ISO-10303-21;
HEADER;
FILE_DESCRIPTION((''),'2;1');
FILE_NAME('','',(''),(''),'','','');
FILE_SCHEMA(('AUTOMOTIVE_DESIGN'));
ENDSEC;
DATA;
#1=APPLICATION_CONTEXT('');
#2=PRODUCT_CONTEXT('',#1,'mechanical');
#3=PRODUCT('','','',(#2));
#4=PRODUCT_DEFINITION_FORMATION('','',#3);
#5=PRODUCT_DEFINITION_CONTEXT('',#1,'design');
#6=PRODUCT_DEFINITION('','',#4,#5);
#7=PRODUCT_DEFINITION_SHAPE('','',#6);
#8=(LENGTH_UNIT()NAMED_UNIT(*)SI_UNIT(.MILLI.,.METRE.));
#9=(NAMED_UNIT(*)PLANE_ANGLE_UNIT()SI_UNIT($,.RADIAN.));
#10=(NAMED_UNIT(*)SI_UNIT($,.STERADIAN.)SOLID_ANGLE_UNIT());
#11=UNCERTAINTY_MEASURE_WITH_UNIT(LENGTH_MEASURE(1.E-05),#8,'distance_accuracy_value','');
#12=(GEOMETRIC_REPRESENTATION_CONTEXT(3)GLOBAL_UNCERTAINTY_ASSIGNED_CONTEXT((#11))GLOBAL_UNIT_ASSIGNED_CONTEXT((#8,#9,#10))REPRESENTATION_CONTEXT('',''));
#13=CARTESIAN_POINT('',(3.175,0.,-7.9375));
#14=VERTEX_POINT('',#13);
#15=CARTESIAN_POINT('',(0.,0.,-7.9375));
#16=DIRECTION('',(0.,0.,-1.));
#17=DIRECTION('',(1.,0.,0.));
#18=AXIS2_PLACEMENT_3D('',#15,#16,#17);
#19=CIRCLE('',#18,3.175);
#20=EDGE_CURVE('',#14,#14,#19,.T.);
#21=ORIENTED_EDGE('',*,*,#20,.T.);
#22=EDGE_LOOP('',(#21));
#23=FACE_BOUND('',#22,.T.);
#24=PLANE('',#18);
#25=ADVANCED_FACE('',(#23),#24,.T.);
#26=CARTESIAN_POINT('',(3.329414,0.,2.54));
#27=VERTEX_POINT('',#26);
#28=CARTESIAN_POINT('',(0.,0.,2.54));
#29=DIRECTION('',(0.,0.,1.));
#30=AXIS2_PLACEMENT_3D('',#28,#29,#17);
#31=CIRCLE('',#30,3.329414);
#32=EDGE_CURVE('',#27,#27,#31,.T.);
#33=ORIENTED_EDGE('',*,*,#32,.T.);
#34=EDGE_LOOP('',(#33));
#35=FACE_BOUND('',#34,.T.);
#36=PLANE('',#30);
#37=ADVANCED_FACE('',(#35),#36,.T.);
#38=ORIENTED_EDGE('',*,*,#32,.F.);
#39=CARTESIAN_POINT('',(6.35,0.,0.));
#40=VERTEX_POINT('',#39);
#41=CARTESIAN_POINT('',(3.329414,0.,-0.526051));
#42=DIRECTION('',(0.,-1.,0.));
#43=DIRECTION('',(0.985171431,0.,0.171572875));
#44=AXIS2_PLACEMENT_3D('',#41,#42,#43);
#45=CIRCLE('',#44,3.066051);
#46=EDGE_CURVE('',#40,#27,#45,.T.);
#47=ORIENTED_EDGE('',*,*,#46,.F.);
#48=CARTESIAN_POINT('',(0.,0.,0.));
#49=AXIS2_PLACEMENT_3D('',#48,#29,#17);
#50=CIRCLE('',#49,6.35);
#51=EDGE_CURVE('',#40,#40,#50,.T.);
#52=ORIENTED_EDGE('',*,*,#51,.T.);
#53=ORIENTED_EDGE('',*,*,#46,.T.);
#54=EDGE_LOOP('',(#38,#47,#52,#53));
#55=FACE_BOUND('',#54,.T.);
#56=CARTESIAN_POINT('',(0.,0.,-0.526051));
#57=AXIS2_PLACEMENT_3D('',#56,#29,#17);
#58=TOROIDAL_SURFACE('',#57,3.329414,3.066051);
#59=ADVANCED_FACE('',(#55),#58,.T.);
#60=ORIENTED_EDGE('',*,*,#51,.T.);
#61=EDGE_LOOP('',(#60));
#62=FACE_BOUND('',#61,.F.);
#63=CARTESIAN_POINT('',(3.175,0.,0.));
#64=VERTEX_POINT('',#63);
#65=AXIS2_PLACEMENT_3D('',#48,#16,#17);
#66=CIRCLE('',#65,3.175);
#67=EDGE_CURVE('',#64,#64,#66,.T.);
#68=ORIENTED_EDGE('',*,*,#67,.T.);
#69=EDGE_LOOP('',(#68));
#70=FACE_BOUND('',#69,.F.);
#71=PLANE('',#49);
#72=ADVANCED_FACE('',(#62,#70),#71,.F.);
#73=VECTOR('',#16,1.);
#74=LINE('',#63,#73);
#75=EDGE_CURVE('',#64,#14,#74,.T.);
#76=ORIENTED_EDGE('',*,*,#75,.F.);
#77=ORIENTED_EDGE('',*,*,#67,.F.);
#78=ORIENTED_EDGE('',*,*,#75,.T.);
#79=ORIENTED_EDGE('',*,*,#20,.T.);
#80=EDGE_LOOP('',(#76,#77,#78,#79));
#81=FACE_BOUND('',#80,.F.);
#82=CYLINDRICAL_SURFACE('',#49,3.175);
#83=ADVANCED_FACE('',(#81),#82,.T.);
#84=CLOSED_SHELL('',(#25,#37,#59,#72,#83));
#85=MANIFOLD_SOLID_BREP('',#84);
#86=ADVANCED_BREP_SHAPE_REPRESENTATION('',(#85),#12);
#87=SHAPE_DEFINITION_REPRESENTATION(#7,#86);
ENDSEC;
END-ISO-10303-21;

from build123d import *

# Parameters (mm, degrees)
F0_R     = 6.35
F1_DEPTH = 2.54
F3_R     = 3.175
F4_DEPTH = 7.9375


# Not quite as in the source:
# - a fillet or chamfer that OpenCascade refuses, or shapes differently, is made with other operations: its cross-section is extruded or revolved along the edge and cut away or added


with BuildPart() as f1:
    # F0 (on Top) → F1 (new body)
    with BuildSketch(Plane.XY):
        Circle(F0_R)
    extrude(amount=F1_DEPTH)

    # F2: fillet of radius 3.0660512242 on 1 edges, made by hand

    # F2_s1 → F2_t2 (revolve, cut)
    with BuildSketch(Plane.XZ):
        with BuildLine():
            ThreePointArc((6.35, 0), (5.3027068749, 1.8206027884), (3.3294139279, 2.54))
            Line((3.3294139279, 2.54), (6.35, 2.54))
            Line((6.35, 2.54), (6.35, 0))
        make_face()
    revolve(axis=Axis((0, 0, 2.54), (0, 0, 1)), mode=Mode.SUBTRACT)

    # F3 (on face) → F4 (join)
    with BuildSketch(Plane(origin=(0, 0, 0), x_dir=(1, 0, 0), z_dir=(0, 0, -1))):
        Circle(F3_R)
    extrude(amount=F4_DEPTH)


solid = f1.part
